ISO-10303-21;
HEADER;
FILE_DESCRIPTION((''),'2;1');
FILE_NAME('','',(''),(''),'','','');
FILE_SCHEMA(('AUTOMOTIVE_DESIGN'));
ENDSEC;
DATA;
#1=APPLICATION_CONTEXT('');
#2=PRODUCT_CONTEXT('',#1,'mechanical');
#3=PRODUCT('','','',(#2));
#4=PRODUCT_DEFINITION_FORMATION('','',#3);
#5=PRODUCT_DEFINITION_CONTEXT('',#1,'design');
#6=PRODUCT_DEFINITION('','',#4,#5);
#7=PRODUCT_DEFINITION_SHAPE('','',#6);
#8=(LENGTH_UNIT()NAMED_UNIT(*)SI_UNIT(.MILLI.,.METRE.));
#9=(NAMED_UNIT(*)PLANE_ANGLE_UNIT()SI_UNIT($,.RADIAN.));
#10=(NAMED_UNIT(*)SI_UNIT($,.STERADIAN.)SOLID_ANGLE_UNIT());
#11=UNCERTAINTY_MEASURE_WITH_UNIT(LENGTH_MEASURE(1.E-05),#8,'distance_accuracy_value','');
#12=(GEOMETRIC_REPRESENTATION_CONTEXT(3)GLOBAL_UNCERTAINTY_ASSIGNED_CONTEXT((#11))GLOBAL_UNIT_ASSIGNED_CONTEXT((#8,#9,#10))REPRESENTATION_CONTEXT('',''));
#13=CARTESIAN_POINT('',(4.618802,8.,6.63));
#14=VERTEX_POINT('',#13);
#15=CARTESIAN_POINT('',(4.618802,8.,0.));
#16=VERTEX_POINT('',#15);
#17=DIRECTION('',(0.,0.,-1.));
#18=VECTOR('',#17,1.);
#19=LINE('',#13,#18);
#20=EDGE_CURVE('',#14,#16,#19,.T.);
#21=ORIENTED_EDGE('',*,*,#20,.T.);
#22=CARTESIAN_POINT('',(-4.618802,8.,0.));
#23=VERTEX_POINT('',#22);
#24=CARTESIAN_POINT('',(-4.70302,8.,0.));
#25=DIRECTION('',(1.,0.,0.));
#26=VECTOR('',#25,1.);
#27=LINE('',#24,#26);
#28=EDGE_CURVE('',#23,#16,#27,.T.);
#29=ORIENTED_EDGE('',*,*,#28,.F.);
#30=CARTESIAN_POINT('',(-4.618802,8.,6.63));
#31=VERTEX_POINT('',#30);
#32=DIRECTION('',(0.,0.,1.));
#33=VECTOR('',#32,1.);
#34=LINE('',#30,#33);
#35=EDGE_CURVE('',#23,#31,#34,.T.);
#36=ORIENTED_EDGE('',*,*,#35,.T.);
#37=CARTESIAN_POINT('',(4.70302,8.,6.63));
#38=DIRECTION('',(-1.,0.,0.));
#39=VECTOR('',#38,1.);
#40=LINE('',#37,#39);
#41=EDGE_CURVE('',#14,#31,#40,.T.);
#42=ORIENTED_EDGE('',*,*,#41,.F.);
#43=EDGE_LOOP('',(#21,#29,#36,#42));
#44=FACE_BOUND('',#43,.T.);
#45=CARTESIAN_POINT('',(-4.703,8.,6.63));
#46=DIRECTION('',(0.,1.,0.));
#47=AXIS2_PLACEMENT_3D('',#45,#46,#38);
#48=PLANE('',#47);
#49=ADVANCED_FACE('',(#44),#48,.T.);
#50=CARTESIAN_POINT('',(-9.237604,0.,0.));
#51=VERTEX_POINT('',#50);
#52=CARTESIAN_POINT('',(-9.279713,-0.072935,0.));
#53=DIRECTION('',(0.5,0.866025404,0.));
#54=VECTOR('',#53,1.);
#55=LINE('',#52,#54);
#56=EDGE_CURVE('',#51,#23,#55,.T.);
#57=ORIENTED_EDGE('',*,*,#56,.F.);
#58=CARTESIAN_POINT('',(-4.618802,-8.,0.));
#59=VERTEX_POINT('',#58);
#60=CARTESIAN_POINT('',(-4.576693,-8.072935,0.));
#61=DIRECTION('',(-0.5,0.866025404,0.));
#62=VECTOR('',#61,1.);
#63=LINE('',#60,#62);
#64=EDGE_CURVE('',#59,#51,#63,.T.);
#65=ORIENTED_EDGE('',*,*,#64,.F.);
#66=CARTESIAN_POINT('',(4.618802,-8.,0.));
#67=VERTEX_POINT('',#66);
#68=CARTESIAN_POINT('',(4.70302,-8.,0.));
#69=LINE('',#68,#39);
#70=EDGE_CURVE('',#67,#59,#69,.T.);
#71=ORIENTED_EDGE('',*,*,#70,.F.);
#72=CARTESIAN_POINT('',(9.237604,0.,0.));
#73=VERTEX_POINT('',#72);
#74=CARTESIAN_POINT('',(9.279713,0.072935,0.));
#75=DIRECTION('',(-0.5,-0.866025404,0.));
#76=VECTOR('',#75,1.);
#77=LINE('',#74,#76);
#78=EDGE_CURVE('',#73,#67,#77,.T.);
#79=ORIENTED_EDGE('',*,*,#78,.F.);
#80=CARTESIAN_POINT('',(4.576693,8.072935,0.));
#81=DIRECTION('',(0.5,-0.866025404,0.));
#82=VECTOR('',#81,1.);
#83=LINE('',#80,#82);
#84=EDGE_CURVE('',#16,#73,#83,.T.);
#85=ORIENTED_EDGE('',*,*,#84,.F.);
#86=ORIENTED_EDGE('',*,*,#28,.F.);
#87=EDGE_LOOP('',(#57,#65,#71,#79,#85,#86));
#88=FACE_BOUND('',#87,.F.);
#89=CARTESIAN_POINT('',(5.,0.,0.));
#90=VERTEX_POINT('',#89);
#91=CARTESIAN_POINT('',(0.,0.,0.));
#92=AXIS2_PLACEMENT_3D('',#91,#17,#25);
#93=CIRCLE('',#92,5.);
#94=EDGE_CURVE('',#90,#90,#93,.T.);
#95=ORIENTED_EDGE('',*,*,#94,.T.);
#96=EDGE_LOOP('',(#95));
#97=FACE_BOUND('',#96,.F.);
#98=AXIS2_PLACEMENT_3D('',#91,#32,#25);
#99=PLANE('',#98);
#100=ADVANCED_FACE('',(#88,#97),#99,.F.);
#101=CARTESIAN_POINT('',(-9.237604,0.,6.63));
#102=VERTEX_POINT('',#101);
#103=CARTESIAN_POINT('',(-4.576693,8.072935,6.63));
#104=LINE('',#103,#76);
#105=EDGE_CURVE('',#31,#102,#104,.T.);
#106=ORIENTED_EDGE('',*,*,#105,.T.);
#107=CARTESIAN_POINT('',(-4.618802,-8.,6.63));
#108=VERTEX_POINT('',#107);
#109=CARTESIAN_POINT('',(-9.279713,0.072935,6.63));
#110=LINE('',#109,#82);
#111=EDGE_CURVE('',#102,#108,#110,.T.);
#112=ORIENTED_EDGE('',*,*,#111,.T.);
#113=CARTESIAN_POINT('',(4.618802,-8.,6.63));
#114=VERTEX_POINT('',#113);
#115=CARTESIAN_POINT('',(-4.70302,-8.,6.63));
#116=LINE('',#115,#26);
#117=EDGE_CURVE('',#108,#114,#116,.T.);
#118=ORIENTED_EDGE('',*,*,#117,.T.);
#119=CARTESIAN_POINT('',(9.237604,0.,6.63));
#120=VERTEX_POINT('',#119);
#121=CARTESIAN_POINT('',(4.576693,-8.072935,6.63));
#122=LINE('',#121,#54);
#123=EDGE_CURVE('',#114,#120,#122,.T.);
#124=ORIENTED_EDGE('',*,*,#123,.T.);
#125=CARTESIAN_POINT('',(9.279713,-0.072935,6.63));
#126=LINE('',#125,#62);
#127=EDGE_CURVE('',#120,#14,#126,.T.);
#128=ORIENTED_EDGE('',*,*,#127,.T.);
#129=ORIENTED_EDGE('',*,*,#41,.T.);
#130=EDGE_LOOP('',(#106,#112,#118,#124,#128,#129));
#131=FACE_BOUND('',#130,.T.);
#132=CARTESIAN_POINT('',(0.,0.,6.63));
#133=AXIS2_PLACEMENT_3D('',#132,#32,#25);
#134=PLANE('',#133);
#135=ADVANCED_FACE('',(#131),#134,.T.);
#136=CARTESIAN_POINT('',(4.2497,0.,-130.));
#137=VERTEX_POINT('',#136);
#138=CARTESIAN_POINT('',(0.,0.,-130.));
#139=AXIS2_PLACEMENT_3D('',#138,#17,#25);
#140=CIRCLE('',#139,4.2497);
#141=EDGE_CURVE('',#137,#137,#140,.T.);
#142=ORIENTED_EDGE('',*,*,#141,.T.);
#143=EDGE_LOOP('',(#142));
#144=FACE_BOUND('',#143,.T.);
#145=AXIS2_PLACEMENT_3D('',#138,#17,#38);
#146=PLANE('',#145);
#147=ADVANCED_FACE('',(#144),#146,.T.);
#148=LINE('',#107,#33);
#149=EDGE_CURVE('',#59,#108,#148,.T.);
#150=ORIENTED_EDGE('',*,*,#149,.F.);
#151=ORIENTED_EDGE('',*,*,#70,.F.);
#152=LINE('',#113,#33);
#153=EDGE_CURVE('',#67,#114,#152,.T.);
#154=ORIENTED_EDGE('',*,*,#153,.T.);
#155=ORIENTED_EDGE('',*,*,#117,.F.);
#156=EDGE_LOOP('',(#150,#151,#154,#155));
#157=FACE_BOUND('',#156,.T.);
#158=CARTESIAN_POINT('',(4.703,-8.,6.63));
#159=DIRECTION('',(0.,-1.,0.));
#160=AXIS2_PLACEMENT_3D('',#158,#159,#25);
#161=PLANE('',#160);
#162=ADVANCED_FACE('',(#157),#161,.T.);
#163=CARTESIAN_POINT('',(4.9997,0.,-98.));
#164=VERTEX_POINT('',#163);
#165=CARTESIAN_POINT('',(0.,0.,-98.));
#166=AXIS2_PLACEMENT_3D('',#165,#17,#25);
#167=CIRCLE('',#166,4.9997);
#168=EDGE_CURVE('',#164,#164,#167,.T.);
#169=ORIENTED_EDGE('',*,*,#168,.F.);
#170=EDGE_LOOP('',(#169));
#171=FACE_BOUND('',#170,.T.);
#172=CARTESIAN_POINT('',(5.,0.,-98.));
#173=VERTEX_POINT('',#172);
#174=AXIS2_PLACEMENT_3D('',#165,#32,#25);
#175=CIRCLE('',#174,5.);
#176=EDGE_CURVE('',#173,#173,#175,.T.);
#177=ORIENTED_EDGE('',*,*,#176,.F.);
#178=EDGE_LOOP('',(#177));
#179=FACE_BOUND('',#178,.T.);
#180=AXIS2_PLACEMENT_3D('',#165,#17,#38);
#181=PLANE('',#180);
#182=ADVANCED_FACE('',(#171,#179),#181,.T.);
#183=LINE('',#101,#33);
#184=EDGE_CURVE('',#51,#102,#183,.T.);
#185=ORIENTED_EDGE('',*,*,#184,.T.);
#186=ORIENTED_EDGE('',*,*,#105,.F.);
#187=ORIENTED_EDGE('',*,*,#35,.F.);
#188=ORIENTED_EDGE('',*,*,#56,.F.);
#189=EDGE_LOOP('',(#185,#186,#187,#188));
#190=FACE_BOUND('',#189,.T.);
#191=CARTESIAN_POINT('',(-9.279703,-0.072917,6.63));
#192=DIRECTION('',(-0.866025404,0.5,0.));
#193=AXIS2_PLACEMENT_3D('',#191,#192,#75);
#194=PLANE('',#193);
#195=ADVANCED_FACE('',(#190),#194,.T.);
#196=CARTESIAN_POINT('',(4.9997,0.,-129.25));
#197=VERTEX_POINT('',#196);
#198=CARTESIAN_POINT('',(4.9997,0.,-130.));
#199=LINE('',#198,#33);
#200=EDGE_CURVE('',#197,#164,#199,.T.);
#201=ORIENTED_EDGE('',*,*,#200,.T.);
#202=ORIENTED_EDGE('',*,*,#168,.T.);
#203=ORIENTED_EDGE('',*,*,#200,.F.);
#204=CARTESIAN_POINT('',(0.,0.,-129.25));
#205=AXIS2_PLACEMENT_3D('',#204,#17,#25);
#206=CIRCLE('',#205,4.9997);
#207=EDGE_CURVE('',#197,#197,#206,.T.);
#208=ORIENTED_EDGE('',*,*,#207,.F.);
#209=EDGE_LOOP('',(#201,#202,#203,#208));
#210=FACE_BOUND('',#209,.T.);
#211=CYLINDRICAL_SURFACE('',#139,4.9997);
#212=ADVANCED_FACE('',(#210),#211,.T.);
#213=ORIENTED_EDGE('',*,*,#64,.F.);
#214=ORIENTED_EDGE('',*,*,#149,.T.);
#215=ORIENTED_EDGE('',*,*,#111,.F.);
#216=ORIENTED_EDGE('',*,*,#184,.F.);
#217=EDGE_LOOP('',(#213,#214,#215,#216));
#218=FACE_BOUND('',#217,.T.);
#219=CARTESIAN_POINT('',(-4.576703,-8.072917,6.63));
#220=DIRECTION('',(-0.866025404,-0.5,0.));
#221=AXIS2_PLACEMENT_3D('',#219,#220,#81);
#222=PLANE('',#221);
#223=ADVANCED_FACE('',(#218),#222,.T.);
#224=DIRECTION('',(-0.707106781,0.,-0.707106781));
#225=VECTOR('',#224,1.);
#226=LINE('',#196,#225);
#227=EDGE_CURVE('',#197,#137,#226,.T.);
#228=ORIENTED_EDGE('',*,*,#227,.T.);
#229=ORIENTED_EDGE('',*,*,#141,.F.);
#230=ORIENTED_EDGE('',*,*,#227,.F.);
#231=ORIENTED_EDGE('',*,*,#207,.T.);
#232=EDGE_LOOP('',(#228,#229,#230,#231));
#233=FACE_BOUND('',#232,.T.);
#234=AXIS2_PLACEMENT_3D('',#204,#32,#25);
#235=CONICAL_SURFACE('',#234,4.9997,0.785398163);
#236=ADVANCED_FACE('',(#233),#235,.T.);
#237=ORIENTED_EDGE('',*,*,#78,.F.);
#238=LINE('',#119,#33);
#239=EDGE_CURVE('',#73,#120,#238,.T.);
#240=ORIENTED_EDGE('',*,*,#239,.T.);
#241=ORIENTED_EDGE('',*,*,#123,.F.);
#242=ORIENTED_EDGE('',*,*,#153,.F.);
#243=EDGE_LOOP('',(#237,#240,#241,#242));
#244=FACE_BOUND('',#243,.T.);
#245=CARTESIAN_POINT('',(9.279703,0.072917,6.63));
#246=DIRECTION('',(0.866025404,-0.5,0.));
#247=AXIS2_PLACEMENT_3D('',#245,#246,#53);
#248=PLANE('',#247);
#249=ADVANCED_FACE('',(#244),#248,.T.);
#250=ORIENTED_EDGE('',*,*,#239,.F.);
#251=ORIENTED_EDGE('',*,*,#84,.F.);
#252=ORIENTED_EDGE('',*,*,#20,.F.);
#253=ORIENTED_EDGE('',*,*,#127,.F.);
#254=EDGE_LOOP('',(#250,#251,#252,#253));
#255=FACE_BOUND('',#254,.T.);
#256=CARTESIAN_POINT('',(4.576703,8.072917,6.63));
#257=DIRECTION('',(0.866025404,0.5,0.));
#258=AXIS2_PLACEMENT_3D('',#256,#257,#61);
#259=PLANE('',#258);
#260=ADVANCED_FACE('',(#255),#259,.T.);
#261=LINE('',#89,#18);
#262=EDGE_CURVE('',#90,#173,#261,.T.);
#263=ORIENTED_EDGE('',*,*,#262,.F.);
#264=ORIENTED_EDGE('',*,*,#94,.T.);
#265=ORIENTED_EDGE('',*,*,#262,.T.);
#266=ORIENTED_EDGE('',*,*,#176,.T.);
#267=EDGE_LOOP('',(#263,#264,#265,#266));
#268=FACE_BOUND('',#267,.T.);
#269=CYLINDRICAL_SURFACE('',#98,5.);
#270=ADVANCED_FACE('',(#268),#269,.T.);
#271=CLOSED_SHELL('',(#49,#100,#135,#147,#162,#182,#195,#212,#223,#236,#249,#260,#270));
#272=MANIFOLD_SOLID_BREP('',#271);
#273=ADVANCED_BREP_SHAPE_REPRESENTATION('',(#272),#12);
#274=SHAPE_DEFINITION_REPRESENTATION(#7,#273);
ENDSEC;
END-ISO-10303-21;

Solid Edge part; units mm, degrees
sketch "Sketch1" plane through (0, 0, 0) normal (0, 0, 1) x (1, 0, 0)
  circle A0 centre (0, 0) radius 9.28
  dimension "D1" = 18.56
extrude "Protrusion1" add sketch "Sketch1" along normal blind 6.63
sketch "Sketch2" plane through (0, 0, 0) normal (0, 0, -1) x (1, 0, 0)
  circle A0 centre (0, 0) radius 5
extrude "Protrusion2" add sketch "Sketch2" along normal blind 130
sketch "Sketch3" plane through (0, 0, -130) normal (0, 0, -1) x (1, 0, 0)
  circle A0 centre (0, 0) radius 4.9997
extrude "Cutout1" cut sketch "Sketch3" against normal blind 32 flip side to cut
chamfer "Chamfer_1" distance 0.75 angle 45 1 edges at (-4.9997, 0, -130)
sketch "Sketch4" plane through (0, 0, 6.63) normal (0, 0, 1) x (1, 0, 0)
  line L0 (-4.703, 8) -> (4.703, 8)
  dimension "D1" = 16
extrude "Cutout2" cut sketch "Sketch4" against normal up to next material side at (0, 8.05, 6.63)
pattern_circular "Pattern1" count 6 over 360 about axis through (0, 0, 6.63) along (0, 0, 1) of "Cutout2"
properties part number "24104936"
